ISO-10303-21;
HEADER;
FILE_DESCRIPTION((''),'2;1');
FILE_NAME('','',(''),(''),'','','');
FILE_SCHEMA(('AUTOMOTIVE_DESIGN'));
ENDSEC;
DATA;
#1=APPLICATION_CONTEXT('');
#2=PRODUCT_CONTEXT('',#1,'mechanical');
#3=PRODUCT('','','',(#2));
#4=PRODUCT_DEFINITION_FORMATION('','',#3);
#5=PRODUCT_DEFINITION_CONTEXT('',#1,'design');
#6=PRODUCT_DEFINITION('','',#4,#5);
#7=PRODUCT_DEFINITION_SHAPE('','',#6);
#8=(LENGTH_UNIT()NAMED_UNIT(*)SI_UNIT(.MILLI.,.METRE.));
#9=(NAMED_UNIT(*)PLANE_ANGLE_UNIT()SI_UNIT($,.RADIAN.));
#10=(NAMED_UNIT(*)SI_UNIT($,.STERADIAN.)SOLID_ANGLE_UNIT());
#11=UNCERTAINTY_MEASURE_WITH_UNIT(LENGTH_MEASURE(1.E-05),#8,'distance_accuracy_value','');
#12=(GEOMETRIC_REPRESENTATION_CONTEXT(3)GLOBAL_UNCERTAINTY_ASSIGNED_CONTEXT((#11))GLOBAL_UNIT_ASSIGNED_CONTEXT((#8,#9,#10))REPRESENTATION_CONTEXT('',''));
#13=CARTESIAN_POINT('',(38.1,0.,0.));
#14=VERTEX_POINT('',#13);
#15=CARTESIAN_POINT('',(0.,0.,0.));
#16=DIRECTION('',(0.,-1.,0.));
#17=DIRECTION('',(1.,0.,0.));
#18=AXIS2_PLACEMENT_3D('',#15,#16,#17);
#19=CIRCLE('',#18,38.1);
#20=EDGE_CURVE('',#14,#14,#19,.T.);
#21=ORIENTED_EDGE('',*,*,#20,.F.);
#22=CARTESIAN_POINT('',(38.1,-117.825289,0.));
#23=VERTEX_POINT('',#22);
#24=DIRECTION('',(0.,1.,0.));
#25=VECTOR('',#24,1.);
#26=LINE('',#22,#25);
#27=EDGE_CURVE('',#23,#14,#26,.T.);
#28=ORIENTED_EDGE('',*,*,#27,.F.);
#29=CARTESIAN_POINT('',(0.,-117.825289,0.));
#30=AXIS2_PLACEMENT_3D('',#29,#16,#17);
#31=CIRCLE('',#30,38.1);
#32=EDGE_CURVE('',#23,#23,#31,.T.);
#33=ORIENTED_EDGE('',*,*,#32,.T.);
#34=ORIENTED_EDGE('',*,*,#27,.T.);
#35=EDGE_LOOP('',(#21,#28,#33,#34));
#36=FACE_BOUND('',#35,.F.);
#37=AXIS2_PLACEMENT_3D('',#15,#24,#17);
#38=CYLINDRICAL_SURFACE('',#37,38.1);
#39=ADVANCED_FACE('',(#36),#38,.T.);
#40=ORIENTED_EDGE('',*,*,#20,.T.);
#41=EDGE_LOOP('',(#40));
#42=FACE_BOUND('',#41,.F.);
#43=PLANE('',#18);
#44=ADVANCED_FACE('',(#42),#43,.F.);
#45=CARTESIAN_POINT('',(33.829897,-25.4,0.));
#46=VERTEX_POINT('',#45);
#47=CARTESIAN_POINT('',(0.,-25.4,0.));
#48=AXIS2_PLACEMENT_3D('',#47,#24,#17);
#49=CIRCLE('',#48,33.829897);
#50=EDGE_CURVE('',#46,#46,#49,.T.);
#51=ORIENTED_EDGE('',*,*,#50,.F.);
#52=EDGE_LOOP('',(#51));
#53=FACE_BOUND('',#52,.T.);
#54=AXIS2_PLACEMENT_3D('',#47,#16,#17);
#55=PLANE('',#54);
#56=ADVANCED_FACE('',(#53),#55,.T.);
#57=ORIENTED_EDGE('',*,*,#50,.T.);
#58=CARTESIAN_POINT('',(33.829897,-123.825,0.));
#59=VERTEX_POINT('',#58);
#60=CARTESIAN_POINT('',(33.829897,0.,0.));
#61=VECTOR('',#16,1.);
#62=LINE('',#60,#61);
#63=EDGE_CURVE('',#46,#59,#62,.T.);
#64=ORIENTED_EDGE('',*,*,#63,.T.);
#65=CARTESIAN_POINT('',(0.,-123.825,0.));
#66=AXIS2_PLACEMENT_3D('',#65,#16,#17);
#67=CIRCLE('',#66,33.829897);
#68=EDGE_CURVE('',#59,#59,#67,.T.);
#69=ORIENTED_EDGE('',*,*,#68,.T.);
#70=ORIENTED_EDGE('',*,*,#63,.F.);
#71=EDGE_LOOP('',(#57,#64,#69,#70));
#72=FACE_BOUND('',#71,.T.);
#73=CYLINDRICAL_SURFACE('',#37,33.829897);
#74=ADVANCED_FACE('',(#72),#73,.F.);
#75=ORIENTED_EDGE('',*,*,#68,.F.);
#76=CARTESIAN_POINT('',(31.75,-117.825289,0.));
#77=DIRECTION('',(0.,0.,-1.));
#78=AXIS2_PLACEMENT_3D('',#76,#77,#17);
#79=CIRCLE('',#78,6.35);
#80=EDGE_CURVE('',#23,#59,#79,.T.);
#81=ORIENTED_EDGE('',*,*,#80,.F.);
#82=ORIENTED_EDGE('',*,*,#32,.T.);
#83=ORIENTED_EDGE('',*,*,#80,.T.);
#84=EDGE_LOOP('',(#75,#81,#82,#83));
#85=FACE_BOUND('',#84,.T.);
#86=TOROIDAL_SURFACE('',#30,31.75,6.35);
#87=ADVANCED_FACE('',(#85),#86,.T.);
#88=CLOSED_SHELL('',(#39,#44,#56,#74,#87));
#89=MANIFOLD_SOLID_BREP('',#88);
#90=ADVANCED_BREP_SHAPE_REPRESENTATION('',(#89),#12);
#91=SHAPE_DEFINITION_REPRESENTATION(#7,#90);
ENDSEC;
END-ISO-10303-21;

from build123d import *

# Parameters (mm, degrees)
F0_R     = 38.1
F0_R_2   = 33.8298969846
F1_DEPTH = 123.825
F2_DEPTH = 9.525
F4_DEPTH = 12.7
F5_R     = 35.7824148946
F6_DEPTH = 25.4


# Not quite as in the source:
# - a fillet or chamfer that OpenCascade refuses, or shapes differently, is made with other operations: its cross-section is extruded or revolved along the edge and cut away or added


with BuildPart() as f1:
    # F0 (on Front) → F1 (new body)
    with BuildSketch(Plane.XZ):
        Circle(F0_R)
        Circle(F0_R_2, mode=Mode.SUBTRACT)
    extrude(amount=F1_DEPTH)

    # F0 (on Front) → F2 (join)
    with BuildSketch(Plane.XZ):
        Circle(F0_R)
        Circle(F0_R_2, mode=Mode.SUBTRACT)
    extrude(amount=F2_DEPTH)

    # F3: fillet of radius 6.35 on 1 edges, made by hand

    # F3_s1 → F3_t2 (revolve, cut)
    with BuildSketch(Plane.XY):
        with BuildLine():
            ThreePointArc((38.1, -117.8252892959), (36.923482669, -121.5073508209), (33.8298969846, -123.825))
            Line((33.8298969846, -123.825), (38.1, -123.825))
            Line((38.1, -123.825), (38.1, -117.8252892959))
        make_face()
    revolve(axis=Axis((0, -123.825, 0), (0, -1, 0)), mode=Mode.SUBTRACT)

    # F0 (on Front) → F4 (join)
    with BuildSketch(Plane.XZ):
        Circle(F0_R)
        Circle(F0_R_2, mode=Mode.SUBTRACT)
    extrude(amount=F4_DEPTH)

    # F5 (on Front) → F6 (join)
    with BuildSketch(Plane.XZ):
        Circle(F5_R)
    extrude(amount=F6_DEPTH)


solid = f1.part
